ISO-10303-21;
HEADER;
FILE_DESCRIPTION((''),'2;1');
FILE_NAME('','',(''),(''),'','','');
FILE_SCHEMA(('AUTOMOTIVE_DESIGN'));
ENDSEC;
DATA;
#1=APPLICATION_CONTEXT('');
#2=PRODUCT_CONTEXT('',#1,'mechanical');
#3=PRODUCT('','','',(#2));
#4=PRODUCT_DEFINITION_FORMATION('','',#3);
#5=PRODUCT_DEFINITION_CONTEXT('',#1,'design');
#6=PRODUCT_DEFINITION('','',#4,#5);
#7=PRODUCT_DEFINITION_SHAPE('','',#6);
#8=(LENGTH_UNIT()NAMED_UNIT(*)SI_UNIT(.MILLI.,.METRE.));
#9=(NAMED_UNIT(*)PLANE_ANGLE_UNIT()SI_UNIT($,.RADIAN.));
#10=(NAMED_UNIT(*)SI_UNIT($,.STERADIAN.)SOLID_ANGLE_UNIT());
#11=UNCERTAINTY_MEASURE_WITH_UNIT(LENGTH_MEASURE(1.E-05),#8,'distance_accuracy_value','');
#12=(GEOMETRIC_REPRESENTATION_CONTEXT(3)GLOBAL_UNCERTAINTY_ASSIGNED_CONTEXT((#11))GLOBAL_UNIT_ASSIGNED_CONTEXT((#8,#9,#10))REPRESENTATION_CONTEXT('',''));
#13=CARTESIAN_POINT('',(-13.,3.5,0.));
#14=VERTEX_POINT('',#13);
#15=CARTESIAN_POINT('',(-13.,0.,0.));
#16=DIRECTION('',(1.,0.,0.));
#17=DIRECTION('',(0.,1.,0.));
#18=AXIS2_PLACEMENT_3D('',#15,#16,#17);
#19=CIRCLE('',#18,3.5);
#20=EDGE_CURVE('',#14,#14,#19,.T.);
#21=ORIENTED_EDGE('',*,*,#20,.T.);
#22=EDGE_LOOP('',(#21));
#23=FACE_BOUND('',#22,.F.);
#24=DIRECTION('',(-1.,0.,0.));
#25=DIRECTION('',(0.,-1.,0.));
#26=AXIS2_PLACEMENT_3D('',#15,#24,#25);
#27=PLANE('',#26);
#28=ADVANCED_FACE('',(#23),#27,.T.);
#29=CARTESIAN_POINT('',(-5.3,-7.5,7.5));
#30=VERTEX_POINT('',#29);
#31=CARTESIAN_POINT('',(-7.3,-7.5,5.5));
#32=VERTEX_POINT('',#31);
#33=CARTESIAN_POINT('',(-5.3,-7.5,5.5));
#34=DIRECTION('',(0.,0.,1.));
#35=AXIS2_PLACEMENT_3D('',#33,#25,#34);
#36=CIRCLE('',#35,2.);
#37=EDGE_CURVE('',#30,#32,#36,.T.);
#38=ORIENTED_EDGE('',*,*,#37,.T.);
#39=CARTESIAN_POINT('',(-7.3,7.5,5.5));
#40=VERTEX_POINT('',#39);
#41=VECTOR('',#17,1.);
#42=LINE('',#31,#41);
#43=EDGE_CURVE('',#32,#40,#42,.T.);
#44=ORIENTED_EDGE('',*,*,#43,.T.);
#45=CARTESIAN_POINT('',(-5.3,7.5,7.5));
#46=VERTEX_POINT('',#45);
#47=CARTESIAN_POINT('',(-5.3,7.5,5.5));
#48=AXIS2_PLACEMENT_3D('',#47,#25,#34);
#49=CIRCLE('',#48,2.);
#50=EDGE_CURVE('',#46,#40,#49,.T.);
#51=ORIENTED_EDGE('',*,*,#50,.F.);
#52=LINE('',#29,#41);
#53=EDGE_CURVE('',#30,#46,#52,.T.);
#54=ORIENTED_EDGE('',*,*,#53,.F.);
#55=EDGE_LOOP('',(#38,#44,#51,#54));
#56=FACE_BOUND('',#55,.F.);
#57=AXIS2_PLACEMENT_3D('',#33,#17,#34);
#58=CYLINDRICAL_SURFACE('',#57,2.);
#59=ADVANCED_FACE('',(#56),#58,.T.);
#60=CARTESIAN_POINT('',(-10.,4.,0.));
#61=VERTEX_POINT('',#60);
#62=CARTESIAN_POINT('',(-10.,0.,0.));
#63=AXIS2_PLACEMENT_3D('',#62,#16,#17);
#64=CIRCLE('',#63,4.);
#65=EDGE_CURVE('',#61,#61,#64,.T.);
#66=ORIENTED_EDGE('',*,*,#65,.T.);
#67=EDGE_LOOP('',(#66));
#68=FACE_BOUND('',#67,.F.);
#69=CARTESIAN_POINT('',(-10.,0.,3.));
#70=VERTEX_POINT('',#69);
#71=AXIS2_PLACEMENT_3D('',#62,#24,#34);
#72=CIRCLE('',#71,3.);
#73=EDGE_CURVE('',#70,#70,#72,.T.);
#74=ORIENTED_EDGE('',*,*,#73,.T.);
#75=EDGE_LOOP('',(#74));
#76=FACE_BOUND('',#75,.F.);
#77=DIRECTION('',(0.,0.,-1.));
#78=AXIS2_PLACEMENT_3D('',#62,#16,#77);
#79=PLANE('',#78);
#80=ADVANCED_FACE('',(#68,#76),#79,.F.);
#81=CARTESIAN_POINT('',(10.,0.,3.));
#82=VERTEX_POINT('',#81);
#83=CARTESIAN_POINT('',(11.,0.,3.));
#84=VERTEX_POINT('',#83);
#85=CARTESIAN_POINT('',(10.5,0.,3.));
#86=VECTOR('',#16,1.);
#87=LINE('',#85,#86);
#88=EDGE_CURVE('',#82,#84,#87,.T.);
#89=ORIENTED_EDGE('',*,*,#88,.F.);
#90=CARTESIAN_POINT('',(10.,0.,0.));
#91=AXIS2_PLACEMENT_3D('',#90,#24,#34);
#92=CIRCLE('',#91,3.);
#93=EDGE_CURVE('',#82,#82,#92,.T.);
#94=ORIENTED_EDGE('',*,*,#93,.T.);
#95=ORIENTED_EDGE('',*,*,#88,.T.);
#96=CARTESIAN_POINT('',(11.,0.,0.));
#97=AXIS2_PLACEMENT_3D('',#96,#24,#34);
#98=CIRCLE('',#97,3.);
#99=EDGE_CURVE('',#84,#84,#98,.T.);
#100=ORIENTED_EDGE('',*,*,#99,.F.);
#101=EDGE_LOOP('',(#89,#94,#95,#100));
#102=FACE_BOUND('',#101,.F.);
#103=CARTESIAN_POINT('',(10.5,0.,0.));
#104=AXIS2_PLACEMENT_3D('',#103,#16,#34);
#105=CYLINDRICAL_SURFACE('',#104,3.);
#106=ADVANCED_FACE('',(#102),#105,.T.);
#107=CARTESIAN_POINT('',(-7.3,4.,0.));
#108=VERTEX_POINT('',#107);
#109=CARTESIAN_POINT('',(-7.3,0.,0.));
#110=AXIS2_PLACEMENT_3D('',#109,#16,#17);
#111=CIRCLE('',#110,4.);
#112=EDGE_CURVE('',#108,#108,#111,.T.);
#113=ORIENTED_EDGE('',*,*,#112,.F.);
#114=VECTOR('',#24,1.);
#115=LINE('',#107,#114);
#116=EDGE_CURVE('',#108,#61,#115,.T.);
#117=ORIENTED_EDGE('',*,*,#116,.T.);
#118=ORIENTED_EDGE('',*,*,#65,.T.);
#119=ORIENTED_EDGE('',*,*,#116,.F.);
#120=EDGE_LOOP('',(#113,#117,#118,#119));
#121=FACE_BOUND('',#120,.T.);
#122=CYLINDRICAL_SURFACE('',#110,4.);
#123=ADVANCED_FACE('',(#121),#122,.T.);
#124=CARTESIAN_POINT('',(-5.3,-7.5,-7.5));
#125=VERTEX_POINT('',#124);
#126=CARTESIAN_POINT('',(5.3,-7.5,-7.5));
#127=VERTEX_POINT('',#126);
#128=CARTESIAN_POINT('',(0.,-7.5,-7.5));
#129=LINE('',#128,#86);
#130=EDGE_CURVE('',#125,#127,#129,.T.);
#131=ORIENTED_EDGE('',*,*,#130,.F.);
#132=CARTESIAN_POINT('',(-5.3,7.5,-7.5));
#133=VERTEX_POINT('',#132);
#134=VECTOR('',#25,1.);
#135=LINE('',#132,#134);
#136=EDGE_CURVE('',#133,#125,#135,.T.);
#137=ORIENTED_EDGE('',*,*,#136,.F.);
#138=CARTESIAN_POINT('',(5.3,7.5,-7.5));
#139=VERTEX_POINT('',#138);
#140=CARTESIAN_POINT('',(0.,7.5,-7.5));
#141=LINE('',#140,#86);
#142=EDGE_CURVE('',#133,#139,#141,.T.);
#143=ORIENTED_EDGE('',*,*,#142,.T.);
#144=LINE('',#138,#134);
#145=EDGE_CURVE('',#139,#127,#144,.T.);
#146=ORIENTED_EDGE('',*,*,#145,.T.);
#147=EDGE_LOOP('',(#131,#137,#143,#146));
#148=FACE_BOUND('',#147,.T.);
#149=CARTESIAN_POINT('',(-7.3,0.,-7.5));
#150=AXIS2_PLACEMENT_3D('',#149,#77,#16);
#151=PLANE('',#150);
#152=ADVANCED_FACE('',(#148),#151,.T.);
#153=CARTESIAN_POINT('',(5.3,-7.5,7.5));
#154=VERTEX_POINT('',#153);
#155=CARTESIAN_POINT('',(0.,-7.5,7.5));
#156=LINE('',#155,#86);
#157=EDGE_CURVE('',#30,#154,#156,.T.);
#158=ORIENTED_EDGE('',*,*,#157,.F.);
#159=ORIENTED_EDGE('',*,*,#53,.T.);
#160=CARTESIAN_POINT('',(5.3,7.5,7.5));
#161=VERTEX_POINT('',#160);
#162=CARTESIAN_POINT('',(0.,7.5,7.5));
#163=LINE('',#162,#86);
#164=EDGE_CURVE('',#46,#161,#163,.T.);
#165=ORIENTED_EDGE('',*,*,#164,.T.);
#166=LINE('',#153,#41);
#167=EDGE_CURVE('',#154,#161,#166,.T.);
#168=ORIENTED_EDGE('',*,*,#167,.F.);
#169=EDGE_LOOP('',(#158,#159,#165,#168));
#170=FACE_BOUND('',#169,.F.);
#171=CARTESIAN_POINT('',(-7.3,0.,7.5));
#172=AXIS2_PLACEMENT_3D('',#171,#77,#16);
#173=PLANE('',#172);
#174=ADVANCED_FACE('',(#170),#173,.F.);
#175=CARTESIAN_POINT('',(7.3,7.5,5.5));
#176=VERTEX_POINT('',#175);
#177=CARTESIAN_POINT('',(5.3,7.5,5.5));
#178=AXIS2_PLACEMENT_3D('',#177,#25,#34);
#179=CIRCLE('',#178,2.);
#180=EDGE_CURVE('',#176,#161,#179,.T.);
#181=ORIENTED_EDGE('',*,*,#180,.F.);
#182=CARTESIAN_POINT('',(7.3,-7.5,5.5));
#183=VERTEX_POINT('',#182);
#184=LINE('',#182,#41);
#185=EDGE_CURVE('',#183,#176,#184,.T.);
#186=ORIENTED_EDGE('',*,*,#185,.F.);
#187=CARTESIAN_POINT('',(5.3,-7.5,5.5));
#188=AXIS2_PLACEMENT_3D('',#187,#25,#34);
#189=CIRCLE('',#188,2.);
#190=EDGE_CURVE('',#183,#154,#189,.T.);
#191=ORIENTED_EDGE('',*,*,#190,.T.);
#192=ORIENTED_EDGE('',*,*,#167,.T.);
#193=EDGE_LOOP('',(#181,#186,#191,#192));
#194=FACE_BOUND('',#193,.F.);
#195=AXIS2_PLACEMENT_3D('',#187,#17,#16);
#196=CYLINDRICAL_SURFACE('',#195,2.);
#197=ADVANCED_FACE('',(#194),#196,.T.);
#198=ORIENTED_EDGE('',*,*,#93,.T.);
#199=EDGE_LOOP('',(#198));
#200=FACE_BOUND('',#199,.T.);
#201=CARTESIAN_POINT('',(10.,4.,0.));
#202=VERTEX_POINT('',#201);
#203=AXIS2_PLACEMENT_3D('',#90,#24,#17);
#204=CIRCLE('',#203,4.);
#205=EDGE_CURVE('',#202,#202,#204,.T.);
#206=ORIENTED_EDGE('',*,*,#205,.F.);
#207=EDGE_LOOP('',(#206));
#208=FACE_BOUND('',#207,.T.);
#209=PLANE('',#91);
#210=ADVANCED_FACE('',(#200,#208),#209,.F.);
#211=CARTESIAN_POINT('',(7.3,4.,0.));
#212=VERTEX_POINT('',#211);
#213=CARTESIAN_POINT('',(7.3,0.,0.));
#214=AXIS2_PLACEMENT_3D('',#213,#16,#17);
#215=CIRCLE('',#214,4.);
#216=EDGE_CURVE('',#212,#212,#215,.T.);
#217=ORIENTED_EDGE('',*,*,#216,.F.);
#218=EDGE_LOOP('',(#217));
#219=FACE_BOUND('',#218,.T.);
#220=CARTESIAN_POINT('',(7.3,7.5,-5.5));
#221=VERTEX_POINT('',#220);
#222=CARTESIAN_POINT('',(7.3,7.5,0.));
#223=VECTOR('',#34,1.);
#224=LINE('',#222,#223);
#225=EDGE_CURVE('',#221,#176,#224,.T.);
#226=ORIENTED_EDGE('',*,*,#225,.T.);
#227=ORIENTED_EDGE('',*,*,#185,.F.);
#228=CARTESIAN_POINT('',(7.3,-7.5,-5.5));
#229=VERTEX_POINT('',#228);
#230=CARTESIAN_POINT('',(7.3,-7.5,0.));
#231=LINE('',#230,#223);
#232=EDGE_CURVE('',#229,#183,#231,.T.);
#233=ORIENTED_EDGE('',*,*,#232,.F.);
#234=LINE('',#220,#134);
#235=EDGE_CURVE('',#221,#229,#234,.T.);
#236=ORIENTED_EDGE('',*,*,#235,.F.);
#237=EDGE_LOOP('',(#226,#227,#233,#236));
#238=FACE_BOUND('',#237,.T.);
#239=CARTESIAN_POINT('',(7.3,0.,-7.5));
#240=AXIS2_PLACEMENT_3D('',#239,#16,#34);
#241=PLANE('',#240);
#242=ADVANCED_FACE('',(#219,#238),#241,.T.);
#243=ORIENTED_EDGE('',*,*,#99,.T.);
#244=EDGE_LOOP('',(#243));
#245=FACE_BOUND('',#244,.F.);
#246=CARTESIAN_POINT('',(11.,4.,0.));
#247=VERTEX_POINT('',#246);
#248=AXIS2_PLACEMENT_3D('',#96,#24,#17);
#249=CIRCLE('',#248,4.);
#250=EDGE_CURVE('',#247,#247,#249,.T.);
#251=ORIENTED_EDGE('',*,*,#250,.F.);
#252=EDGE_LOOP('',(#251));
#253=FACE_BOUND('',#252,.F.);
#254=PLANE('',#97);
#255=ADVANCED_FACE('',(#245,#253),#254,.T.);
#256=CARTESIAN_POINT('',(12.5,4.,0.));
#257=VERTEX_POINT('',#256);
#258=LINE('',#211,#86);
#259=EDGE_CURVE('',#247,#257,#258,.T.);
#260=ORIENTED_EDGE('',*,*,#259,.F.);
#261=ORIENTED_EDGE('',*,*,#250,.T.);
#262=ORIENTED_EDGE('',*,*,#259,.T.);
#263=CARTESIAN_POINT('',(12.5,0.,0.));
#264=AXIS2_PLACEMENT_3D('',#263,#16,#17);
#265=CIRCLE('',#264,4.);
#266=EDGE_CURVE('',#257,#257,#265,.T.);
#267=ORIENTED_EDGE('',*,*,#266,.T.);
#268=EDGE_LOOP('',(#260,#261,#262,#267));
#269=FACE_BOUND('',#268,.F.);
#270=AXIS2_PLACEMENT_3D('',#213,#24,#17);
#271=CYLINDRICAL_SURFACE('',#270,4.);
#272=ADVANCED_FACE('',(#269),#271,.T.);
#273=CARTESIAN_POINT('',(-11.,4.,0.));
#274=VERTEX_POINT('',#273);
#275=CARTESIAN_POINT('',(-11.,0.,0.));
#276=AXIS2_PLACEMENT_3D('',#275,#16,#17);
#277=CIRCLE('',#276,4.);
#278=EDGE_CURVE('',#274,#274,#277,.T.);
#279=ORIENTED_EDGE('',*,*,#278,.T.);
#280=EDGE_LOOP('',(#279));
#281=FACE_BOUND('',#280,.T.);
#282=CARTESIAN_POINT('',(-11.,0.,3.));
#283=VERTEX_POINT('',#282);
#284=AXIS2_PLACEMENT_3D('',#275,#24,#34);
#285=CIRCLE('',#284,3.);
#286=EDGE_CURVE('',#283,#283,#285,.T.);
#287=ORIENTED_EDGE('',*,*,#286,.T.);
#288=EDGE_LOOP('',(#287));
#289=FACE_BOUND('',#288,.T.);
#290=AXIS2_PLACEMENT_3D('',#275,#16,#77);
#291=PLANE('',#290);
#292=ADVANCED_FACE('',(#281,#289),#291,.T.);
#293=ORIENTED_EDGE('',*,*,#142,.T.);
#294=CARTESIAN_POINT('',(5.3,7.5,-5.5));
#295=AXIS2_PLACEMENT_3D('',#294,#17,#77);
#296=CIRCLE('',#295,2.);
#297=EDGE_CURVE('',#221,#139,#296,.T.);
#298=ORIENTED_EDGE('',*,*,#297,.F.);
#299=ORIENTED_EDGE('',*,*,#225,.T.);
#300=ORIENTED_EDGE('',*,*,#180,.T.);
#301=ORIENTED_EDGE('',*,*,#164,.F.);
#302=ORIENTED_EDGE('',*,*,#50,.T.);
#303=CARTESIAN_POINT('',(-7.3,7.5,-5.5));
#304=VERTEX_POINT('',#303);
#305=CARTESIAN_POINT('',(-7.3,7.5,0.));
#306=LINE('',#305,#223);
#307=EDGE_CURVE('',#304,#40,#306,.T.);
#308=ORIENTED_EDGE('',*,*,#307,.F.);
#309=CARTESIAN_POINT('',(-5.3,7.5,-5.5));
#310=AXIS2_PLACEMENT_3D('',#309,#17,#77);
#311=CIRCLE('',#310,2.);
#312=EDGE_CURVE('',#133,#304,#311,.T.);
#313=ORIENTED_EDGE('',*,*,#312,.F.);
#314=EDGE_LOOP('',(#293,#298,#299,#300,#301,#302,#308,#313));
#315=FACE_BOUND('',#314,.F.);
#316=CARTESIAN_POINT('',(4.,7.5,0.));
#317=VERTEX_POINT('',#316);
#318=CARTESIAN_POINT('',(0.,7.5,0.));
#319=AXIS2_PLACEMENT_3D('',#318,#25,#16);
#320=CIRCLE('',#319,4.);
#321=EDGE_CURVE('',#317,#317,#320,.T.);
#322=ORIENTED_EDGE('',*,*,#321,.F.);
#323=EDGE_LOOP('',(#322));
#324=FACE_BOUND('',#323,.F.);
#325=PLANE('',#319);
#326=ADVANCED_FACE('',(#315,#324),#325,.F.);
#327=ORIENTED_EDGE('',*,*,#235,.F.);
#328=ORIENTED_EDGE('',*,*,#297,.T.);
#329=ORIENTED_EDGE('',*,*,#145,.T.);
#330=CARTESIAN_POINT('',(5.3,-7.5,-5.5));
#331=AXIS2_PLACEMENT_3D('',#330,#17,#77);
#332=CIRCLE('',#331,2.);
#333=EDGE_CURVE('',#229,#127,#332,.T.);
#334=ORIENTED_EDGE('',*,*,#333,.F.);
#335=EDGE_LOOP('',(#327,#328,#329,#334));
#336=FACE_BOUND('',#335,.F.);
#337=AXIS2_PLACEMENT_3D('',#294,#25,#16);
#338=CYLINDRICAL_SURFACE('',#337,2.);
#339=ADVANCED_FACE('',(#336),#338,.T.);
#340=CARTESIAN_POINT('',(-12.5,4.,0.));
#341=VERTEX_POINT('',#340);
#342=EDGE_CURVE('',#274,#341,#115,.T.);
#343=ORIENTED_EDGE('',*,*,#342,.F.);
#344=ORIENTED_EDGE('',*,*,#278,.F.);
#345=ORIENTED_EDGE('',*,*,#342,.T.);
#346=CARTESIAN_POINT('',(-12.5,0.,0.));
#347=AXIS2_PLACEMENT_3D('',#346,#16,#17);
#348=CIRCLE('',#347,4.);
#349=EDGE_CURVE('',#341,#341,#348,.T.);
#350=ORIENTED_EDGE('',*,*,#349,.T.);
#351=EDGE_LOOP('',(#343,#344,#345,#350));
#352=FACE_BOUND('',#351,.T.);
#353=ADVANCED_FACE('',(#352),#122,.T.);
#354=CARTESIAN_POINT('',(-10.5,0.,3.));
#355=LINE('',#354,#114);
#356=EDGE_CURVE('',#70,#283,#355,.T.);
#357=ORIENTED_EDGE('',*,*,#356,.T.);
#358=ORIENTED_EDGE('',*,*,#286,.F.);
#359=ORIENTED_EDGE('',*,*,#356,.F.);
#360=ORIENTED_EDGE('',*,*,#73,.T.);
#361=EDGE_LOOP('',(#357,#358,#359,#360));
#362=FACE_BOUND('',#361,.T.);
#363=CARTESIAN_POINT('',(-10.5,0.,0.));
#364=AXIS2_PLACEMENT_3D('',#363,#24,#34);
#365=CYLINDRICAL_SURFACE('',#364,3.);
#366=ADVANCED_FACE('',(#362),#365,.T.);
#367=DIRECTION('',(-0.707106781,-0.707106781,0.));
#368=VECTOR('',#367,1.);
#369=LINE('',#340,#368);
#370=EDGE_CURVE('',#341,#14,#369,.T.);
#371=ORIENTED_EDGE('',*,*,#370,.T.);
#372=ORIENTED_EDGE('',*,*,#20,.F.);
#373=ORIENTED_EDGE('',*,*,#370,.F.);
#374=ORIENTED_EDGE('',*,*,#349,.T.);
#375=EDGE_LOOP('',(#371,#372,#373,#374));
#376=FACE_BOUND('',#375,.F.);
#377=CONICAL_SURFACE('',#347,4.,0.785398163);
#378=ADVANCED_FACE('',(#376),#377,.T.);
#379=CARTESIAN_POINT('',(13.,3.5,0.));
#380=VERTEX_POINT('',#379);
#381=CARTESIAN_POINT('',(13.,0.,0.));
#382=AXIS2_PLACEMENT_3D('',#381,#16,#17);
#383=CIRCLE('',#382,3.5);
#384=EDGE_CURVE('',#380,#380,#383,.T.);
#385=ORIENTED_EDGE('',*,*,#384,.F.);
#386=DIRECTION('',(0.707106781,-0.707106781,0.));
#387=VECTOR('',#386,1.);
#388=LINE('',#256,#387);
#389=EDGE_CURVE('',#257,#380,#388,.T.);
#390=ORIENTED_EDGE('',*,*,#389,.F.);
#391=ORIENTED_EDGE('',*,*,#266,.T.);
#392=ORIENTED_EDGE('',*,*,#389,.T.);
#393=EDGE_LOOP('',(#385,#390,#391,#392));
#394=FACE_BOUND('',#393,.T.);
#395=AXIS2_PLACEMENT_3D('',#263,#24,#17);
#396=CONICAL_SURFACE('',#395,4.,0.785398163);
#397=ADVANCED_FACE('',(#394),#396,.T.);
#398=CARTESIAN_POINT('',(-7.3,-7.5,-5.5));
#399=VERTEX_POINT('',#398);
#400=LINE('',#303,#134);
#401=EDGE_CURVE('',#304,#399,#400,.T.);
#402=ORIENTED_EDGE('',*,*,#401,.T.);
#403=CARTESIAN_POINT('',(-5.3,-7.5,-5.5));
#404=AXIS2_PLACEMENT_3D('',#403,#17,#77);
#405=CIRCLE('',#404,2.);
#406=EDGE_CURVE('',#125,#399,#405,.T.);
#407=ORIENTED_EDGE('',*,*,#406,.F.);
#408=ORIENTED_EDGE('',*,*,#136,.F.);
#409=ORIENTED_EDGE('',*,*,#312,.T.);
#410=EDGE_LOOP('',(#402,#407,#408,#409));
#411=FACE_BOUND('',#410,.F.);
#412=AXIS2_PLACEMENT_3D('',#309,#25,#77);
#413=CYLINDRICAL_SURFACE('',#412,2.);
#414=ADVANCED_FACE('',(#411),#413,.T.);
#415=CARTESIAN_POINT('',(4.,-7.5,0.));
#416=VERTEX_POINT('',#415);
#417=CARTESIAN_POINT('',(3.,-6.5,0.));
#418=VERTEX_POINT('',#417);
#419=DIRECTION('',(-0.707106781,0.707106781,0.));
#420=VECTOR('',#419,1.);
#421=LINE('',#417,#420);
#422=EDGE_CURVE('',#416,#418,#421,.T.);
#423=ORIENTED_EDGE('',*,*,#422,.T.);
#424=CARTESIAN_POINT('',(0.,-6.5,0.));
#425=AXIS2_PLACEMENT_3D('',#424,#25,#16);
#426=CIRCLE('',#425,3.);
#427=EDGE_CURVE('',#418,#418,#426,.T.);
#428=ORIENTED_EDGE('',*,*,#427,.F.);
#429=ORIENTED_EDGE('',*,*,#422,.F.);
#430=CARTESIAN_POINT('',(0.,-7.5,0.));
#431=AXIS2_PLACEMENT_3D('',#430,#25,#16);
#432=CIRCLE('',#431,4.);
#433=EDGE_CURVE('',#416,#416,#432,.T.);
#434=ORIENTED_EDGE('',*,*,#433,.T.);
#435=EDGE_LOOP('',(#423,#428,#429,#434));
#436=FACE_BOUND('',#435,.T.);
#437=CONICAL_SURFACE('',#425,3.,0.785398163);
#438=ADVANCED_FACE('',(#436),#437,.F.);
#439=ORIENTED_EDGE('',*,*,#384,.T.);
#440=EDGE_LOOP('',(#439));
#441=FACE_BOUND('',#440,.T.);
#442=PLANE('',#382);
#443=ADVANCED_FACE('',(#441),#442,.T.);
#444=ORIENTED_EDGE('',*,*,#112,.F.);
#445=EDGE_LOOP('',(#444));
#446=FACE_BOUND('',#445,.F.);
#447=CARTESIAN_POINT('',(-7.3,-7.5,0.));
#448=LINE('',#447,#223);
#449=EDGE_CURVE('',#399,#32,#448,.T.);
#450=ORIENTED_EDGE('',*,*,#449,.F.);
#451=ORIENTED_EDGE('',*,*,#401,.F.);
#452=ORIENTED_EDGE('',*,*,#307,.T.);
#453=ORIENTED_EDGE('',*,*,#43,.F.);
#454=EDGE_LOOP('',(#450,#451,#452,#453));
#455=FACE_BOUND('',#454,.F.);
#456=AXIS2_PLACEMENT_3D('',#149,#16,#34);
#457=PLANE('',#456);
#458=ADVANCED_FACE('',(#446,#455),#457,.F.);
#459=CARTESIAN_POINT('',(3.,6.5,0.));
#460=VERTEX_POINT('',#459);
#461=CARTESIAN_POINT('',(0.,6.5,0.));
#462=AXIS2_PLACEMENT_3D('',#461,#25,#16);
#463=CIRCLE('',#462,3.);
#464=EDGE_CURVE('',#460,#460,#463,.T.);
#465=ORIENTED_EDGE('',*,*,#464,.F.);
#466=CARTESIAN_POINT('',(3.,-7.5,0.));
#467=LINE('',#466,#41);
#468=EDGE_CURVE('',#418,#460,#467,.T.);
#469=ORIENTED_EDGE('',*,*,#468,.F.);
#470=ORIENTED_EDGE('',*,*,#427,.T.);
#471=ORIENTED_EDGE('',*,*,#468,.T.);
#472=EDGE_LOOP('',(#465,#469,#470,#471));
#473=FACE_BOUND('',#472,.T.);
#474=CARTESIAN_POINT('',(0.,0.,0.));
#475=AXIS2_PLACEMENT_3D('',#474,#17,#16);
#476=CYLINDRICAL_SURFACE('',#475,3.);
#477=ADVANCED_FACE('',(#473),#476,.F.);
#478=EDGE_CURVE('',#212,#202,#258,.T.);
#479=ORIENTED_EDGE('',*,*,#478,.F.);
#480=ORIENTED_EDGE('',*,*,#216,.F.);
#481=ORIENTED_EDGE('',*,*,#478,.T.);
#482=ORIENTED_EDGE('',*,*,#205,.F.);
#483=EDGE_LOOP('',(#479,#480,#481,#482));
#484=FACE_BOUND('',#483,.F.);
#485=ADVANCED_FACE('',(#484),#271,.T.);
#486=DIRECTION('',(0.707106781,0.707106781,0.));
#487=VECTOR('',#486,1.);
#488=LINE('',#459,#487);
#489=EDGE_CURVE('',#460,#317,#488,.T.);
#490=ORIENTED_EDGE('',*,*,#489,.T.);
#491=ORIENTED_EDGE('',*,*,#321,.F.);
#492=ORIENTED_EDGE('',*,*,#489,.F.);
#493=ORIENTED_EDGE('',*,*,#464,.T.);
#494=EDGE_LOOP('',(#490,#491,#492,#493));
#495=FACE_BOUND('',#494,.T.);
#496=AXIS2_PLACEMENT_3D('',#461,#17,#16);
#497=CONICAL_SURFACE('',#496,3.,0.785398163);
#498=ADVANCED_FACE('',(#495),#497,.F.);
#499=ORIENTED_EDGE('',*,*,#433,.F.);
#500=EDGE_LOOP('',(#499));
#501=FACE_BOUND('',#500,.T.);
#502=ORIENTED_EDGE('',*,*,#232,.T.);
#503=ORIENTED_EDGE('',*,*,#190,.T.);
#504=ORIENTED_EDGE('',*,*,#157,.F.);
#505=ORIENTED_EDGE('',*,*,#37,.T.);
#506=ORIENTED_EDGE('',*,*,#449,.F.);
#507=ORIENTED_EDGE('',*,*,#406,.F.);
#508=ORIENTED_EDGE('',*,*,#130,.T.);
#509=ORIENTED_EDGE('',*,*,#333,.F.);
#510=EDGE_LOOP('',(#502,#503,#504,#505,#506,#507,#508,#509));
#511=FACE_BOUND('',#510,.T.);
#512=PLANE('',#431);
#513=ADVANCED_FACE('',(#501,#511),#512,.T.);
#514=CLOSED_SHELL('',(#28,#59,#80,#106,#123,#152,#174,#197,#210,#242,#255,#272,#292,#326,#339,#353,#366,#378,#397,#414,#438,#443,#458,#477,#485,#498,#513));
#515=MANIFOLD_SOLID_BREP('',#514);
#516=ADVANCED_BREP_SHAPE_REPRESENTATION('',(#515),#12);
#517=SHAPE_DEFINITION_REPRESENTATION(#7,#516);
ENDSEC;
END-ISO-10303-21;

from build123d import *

# Parameters (mm, degrees)
F0_W     = 14.6
F0_H     = 15
F0_R     = 3
F1_DEPTH = 7.5
F2_SIZE  = 1
F3_R     = 4
F4_DEPTH = 5.7
F5_W     = 1
F5_H     = 1
F7_SIZE  = 0.5
F8_R     = 2


# Not quite as in the source:
# - a pattern or mirror of a feature is missing from the dataset's text; its kind, count and spacing are read off the source's solid


with BuildPart() as f1:
    # F0 (on Front) → F1 (new body, symmetric)
    with BuildSketch(Plane.XZ):
        Rectangle(F0_W, F0_H)
        Circle(F0_R, mode=Mode.SUBTRACT)
    extrude(amount=F1_DEPTH, both=True)

    # F2
    f2_edges = [f1.edges().sort_by_distance(p)[0] for p in [
        (-3, -7.5, 0),
        (-3, 7.5, 0),
    ]]
    chamfer(f2_edges, length=F2_SIZE)

    # F3 (on face) → F4 (join)
    with BuildSketch(Plane.YZ.offset(7.3)):
        Circle(F3_R)
    f4 = extrude(amount=F4_DEPTH)

    # F4_copies: F4 across plane
    add(f4.mirror(Plane(origin=(0, 0, 0), x_dir=(0, 0, -1), z_dir=(-1, 0, 0))))

    # F5 (on Front) → F6 (revolve, cut)
    with BuildSketch(Plane.XZ):
        with Locations((10.5, 3.5)):
            Rectangle(F5_W, F5_H)
    f6 = revolve(axis=Axis((10.5, 0, 0), (-1, 0, 0)), mode=Mode.SUBTRACT)

    # F6_copies: F6 across plane
    add(f6.mirror(Plane(origin=(0, 0, 0), x_dir=(0, 0, -1), z_dir=(-1, 0, 0))), mode=Mode.SUBTRACT)

    # F7
    f7_edges = [f1.edges().sort_by_distance(p)[0] for p in [
        (13, -4, 0),
        (-13, -4, 0),
    ]]
    chamfer(f7_edges, length=F7_SIZE)

    # F8
    f8_edges = [f1.edges().sort_by_distance(p)[0] for p in [
        (-7.3, 0, 7.5),
        (7.3, 0, 7.5),
        (-7.3, 0, -7.5),
        (7.3, 0, -7.5),
    ]]
    fillet(f8_edges, radius=F8_R)


solid = f1.part
